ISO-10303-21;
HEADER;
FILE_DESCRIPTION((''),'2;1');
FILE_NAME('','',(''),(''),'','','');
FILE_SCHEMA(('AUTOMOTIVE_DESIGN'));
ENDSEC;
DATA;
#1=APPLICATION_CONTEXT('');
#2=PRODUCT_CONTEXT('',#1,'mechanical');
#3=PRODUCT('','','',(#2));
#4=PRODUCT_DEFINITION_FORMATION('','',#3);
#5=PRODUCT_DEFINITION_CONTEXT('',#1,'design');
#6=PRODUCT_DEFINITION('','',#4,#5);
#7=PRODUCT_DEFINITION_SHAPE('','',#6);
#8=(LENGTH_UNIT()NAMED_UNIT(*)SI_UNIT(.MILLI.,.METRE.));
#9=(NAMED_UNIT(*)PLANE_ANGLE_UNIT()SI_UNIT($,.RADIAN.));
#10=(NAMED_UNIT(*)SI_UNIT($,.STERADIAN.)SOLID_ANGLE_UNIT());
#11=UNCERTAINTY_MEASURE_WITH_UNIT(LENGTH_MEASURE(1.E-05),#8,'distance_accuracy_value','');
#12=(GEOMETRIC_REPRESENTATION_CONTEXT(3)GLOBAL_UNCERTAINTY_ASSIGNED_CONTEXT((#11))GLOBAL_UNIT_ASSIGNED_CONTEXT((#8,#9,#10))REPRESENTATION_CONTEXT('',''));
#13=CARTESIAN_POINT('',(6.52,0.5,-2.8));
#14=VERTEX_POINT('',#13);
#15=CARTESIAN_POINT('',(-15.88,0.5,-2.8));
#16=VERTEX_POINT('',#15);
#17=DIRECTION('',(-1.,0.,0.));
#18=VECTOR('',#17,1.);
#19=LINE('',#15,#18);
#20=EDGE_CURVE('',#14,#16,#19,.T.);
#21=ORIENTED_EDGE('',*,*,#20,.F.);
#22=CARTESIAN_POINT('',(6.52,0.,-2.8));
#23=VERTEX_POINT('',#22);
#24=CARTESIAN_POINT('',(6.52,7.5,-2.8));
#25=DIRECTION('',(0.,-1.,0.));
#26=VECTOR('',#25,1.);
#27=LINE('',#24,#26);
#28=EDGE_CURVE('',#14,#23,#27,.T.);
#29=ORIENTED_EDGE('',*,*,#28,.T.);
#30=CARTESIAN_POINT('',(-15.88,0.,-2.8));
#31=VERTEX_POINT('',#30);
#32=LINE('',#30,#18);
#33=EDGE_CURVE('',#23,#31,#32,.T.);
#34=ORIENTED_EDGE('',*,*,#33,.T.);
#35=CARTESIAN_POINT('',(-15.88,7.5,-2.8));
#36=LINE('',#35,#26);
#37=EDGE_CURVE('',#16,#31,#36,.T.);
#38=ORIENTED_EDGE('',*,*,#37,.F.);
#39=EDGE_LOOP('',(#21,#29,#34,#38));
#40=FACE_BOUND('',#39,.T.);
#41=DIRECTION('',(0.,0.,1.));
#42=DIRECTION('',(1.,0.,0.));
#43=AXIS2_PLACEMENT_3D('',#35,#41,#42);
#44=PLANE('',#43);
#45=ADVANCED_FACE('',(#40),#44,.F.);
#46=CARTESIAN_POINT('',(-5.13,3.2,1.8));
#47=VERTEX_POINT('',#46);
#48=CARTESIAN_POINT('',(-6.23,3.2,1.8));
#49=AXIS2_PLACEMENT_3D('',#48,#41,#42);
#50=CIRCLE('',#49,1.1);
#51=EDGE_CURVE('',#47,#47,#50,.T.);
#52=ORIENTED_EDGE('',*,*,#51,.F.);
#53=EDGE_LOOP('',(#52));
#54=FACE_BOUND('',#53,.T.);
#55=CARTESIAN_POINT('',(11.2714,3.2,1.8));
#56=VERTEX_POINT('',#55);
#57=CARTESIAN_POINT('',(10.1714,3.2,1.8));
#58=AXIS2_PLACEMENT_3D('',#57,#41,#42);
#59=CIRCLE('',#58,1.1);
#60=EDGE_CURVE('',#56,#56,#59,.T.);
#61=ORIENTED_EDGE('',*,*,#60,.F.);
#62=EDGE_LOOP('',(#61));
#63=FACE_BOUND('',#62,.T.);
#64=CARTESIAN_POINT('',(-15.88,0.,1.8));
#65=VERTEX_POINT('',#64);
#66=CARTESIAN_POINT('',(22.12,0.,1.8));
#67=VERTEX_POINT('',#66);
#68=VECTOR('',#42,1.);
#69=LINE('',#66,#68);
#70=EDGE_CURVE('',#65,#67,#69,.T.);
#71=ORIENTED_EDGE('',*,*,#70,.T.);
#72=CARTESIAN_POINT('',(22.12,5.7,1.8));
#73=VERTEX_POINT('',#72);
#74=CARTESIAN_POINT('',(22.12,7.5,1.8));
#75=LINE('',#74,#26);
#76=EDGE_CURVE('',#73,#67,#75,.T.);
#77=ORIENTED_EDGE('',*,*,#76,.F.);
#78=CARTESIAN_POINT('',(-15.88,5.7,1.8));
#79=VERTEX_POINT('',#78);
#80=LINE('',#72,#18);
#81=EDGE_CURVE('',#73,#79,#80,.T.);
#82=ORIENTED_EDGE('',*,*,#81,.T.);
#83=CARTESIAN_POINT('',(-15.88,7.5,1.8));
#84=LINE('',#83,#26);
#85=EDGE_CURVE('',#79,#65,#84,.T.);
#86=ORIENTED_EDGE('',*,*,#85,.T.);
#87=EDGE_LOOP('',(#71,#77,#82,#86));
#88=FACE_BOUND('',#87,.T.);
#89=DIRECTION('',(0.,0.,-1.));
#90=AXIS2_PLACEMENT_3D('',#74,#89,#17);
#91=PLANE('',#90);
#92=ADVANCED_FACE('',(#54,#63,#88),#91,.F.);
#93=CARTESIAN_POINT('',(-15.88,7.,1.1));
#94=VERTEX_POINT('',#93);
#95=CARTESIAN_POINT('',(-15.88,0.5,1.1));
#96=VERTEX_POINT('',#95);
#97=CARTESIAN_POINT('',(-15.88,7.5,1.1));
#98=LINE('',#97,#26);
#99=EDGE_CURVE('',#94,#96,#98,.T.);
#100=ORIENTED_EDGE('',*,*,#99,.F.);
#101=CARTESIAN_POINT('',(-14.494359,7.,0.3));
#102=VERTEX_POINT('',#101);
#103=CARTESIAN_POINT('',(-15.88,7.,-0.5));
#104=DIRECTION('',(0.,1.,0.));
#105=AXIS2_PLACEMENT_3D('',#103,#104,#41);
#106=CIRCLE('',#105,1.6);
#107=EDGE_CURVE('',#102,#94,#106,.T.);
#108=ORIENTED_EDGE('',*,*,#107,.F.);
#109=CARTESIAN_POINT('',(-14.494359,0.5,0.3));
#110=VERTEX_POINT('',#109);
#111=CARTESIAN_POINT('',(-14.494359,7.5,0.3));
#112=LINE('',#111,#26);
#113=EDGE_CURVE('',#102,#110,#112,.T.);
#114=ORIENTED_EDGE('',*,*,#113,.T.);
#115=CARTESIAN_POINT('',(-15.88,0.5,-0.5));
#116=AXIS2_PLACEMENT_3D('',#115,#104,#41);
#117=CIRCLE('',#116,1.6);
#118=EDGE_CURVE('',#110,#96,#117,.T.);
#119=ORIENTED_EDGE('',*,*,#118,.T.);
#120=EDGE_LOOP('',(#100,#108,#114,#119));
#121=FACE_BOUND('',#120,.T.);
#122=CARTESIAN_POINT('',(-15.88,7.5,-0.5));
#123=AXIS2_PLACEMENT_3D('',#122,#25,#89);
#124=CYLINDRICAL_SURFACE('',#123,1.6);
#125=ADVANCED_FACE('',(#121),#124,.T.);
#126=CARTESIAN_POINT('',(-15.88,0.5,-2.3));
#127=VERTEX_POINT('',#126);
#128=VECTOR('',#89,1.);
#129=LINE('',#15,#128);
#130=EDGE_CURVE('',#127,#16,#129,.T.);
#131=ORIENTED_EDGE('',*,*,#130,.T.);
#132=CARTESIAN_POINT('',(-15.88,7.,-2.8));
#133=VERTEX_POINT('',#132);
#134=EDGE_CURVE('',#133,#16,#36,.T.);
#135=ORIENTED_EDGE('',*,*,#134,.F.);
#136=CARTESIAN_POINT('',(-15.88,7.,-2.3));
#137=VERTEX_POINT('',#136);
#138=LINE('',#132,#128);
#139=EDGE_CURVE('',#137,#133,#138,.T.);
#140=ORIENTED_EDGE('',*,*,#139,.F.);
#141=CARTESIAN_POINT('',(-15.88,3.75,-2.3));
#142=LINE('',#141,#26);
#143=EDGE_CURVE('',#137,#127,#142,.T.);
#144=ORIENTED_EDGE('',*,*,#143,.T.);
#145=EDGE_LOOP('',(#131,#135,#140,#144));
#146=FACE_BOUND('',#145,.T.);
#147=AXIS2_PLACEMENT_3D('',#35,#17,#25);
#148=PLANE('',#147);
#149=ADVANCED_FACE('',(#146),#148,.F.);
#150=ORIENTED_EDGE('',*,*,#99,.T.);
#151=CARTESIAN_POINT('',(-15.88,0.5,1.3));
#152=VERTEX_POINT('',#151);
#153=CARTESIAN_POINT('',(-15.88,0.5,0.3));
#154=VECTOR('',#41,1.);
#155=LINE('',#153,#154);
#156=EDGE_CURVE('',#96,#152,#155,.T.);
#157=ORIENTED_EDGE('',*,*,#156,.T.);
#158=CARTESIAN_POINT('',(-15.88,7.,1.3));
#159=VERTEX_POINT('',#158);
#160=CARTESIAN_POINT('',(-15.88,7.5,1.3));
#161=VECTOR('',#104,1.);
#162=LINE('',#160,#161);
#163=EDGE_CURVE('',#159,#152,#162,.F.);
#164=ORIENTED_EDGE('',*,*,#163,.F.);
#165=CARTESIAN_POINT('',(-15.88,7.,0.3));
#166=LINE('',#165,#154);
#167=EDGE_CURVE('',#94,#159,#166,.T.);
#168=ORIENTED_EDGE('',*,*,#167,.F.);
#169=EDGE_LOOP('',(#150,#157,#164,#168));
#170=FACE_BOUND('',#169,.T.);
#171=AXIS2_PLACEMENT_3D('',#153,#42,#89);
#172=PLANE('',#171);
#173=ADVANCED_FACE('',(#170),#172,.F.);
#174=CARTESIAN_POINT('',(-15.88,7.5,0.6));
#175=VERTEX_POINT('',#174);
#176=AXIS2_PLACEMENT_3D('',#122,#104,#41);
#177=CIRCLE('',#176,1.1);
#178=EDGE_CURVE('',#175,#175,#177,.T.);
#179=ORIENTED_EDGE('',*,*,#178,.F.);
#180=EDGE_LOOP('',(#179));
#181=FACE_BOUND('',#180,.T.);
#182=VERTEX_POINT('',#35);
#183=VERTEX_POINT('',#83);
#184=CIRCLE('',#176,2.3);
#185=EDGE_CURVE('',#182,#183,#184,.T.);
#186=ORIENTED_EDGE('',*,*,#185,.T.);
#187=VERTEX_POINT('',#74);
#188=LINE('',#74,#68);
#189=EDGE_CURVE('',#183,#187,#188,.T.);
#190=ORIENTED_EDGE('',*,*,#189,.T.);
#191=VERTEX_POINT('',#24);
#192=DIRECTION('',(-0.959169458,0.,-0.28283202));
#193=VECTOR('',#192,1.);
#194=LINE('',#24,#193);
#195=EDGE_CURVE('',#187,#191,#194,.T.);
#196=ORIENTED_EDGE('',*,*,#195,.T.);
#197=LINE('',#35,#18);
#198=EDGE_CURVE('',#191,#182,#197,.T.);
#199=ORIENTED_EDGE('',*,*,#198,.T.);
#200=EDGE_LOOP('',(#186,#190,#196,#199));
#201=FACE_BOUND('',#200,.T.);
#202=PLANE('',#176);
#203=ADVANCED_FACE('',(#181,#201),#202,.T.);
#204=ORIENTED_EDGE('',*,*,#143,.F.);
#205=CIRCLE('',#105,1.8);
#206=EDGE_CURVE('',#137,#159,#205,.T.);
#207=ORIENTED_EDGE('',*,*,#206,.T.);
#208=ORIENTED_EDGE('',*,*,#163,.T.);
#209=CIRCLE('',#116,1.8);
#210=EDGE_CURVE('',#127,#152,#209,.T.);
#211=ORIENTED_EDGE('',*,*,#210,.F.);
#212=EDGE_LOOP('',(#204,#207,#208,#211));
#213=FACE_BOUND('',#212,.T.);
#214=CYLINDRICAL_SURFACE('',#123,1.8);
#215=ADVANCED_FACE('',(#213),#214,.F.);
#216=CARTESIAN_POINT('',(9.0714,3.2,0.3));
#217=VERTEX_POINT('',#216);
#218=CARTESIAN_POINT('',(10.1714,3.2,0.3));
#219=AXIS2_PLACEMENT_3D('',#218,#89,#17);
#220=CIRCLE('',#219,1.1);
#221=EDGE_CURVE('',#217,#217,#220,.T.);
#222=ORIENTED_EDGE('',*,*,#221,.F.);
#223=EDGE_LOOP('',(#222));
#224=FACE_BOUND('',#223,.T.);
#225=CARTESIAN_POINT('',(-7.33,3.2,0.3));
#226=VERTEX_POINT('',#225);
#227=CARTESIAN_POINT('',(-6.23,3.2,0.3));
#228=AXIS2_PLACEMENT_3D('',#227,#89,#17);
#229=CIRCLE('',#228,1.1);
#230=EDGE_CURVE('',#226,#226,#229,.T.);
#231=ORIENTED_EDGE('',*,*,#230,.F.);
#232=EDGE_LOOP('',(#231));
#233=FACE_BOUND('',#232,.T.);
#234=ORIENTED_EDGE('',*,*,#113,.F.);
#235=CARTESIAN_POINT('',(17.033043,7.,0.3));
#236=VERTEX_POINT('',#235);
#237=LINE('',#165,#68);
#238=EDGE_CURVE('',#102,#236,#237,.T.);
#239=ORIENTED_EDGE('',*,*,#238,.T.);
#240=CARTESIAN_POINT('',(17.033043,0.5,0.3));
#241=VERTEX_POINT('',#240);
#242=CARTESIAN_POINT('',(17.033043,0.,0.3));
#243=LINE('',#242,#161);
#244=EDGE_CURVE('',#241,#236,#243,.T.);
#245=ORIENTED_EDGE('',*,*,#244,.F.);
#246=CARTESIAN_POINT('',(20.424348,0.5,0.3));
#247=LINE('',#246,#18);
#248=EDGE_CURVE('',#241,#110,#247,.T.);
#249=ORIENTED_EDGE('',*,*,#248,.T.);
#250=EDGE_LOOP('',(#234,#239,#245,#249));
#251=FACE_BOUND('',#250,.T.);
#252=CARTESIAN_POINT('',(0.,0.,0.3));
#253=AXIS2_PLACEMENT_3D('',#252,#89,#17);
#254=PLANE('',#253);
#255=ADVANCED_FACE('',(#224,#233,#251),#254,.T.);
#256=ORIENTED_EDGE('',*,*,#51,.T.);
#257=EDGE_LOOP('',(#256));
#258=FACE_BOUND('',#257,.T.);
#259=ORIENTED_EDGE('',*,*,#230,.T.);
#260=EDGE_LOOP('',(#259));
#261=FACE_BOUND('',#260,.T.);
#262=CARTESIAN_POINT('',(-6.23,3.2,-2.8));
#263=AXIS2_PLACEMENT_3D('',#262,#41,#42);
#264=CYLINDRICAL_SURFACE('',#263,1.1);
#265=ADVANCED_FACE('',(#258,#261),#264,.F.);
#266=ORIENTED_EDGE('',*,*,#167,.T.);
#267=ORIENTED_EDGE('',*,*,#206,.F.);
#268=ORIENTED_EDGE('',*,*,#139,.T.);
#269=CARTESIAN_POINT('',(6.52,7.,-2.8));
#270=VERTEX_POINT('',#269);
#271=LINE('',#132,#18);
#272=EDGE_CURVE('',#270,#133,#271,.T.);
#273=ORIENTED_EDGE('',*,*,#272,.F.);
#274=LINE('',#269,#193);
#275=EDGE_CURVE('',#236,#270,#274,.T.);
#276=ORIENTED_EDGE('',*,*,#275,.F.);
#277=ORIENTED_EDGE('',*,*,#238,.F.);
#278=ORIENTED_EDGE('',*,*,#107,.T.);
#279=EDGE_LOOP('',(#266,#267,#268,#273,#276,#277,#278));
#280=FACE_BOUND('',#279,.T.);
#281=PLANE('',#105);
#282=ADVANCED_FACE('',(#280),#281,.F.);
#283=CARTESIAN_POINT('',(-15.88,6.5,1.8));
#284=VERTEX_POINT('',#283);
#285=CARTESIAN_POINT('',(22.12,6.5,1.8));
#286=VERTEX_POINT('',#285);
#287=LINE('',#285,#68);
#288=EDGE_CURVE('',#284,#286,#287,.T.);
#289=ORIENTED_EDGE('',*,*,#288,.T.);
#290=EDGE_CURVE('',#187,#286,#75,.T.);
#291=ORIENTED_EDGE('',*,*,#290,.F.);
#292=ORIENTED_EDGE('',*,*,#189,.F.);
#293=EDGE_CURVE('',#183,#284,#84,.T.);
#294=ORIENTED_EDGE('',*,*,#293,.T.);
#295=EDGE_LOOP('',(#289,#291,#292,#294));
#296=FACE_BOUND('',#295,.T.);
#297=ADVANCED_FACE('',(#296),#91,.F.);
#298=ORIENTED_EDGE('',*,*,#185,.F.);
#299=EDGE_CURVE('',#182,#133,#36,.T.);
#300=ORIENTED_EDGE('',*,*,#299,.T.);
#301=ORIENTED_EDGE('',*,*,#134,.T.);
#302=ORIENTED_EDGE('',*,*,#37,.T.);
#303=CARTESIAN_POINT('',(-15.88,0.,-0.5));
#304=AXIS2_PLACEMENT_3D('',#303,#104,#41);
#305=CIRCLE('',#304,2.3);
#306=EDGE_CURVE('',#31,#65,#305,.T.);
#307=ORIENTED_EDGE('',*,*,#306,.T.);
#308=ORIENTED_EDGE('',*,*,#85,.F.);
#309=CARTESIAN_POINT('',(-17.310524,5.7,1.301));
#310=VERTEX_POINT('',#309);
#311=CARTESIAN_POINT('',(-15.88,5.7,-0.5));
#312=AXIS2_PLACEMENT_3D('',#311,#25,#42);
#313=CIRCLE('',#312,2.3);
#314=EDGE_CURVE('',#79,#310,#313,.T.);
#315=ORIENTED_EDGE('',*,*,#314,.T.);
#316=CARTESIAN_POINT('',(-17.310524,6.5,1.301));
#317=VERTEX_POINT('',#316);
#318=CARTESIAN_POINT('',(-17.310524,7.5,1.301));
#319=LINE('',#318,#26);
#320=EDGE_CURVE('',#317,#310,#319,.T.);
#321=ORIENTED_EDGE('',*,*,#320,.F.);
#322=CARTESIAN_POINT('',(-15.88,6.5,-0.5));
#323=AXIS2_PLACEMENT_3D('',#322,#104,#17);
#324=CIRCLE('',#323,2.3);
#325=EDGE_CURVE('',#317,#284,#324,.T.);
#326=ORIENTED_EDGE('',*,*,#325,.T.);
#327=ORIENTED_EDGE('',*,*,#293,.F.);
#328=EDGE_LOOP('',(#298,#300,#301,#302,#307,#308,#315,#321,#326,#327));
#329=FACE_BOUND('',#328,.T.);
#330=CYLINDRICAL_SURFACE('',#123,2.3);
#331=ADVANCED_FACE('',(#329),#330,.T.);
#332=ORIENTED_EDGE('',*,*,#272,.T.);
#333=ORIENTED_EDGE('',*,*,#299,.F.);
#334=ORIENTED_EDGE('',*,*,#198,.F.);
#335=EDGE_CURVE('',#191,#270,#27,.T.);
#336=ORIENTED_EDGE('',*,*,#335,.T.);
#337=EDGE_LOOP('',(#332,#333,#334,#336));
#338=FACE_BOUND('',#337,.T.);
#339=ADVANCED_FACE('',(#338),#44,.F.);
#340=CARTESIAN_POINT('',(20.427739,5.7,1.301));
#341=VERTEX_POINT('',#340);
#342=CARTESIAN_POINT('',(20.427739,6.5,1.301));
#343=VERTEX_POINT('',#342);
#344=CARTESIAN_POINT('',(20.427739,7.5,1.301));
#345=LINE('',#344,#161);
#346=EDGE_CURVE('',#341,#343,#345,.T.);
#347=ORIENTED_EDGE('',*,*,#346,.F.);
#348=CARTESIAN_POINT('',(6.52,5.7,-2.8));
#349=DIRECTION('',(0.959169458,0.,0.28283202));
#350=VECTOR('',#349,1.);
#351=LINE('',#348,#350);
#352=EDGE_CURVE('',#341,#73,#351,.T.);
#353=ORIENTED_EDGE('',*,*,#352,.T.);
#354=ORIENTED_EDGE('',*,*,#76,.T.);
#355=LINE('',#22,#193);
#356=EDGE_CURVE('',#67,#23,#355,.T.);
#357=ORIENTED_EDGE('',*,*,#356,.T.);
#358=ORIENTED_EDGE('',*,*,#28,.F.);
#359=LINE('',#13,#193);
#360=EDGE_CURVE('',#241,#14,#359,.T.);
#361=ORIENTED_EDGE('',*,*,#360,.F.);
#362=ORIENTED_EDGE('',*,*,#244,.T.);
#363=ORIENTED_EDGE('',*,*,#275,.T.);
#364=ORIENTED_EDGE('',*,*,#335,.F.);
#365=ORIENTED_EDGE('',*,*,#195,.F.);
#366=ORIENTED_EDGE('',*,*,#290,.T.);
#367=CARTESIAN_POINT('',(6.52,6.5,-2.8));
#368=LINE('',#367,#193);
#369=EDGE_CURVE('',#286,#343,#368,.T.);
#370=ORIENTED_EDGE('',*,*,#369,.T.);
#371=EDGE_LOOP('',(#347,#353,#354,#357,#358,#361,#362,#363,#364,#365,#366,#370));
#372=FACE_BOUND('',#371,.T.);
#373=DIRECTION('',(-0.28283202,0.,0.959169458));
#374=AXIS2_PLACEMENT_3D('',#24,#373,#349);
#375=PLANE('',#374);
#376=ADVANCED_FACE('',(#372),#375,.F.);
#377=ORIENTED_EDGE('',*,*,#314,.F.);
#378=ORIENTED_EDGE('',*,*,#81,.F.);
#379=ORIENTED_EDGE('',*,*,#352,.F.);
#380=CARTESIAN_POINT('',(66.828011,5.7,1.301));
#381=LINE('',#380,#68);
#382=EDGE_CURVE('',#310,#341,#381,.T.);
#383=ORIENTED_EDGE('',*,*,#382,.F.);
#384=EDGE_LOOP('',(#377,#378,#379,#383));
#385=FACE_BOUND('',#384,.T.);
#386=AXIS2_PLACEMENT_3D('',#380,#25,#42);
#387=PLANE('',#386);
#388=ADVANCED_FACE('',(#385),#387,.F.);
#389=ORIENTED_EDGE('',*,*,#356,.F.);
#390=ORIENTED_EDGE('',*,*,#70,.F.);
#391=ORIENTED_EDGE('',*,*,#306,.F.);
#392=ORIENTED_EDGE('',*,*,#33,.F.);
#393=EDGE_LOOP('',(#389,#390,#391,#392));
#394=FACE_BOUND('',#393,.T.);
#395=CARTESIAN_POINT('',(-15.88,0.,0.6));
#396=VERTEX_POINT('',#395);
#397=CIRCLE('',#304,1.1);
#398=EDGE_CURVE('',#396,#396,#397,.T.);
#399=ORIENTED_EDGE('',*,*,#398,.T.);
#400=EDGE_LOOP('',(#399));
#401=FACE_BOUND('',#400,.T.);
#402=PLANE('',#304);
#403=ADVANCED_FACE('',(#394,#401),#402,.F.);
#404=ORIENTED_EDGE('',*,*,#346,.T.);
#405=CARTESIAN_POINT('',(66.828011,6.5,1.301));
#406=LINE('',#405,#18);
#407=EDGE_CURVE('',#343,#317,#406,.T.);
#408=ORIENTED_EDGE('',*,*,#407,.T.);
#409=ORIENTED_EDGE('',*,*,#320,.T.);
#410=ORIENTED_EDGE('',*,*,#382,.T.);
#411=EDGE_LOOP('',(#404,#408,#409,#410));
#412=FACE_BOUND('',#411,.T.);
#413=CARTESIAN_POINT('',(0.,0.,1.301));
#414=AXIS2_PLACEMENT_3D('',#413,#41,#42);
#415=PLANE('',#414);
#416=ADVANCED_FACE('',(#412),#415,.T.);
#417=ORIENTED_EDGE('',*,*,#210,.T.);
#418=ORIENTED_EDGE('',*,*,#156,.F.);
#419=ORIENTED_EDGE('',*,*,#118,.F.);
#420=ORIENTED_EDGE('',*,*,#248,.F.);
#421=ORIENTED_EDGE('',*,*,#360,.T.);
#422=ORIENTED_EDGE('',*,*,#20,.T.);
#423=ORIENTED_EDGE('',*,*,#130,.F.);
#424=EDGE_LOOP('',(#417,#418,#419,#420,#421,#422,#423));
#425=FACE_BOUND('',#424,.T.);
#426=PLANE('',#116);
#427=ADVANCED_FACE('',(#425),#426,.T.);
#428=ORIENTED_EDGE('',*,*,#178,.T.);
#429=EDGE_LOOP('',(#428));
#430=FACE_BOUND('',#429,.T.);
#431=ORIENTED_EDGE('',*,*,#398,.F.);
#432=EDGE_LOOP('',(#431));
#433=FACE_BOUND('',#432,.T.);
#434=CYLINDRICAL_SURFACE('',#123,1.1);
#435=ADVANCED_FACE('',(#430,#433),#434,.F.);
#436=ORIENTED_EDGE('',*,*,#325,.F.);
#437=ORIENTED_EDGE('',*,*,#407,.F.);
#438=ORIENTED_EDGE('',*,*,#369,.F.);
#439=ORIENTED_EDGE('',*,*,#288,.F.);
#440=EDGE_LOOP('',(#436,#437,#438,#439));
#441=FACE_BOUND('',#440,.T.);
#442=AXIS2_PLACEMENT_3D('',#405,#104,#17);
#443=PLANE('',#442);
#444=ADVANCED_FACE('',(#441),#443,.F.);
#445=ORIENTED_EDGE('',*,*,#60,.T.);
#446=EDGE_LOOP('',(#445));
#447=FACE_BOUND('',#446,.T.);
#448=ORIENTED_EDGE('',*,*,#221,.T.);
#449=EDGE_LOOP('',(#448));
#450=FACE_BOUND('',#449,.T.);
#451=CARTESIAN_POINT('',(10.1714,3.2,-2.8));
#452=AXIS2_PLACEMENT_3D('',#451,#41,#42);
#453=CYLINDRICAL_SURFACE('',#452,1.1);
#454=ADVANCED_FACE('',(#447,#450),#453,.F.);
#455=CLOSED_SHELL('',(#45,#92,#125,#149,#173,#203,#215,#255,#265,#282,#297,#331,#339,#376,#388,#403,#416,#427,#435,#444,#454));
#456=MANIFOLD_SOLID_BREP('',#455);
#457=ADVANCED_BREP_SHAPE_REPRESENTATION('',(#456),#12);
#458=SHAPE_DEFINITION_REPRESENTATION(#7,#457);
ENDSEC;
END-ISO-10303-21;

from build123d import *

# Parameters (mm, degrees)
SKETCH3_R           = 1.1
BOSS_EXTRUDE1_DEPTH = 7.5
SHELL1_START        = 0.5
SHELL1_OUTLINE_R    = 1.6
SHELL1_DEPTH        = 6.5
SKETCH5_W           = 36.304347826
SKETCH5_H           = 6.5
BOSS_EXTRUDE2_DEPTH = 1
CUT_EXTRUDE2_DEPTH  = 24.369518609
SKETCH7_R           = 1.1
CUT_EXTRUDE3_DEPTH  = 24.524123788
SKETCH10_W          = 87.275560702
SKETCH10_H          = 0.8
CUT_EXTRUDE15_DEPTH = 0.499
SKETCH11_R          = 1.1
CUT_EXTRUDE16_DEPTH = 24.805553974


# Read off the part's stored shape, not the designer's step: Shell1
with BuildPart() as part:
    # Sketch3 → Boss-Extrude1 (new body)
    with BuildSketch(Plane(origin=(0, 0, 0), x_dir=(1, 0, 0), z_dir=(0, 1, 0))):
        with BuildLine():
            Line((-15.88, 2.8), (6.52, 2.8))
            Line((6.52, 2.8), (22.12, -1.8))
            Line((22.12, -1.8), (-15.88, -1.8))
            ThreePointArc((-15.88, -1.8), (-18.18, 0.5), (-15.88, 2.8))
        make_face()
        with Locations(Location((-15.88, 0.5, 0), (0, 0, 270))):
            Circle(SKETCH3_R, mode=Mode.SUBTRACT)
    extrude(amount=BOSS_EXTRUDE1_DEPTH)

    # Shell1 outline → Shell1 (cut)
    with BuildSketch(Plane(origin=(0, 0, 0), x_dir=(1, 0, 0), z_dir=(0, 1, 0)).offset(SHELL1_START)):
        with BuildLine():
            Line((6.52, 2.8), (-15.88, 2.8))
            Line((-15.88, 2.8), (-15.88, 2.3))
            ThreePointArc((-15.88, 2.3), (-17.68, 0.5), (-15.88, -1.3))
            Line((-15.88, -1.3), (20.424347826, -1.3))
            Line((20.424347826, -1.3), (6.52, 2.8))
        make_face()
        with Locations((-15.88, 0.5)):
            Circle(SHELL1_OUTLINE_R, mode=Mode.SUBTRACT)
    extrude(amount=SHELL1_DEPTH, mode=Mode.SUBTRACT)

    # Sketch5 → Boss-Extrude2 (add)
    with BuildSketch(Plane(origin=(0, 0, 1.3), x_dir=(-1, 0, 0), z_dir=(0, 0, -1))):
        with Locations((-2.272173913, 3.75)):
            Rectangle(SKETCH5_W, SKETCH5_H)
    extrude(amount=BOSS_EXTRUDE2_DEPTH)

    # Sketch6 → Cut-Extrude2 (cut, through all)
    with BuildSketch(Plane(origin=(0, 7, 0), x_dir=(1, 0, 0), z_dir=(0, 1, 0))):
        Polygon((20.424347826, -0.3), (17.033043478, -0.3), (20.424347826, -1.3), align=None)
    extrude(amount=-CUT_EXTRUDE2_DEPTH, mode=Mode.SUBTRACT)

    # Sketch7 → Cut-Extrude3 (cut, through all)
    with BuildSketch(Plane(origin=(0, 7.5, 0), x_dir=(1, 0, 0), z_dir=(0, 1, 0))):
        with Locations(Location((-15.88, 0.5, 0), (0, 0, 270))):
            Circle(SKETCH7_R)
    extrude(amount=-CUT_EXTRUDE3_DEPTH, mode=Mode.SUBTRACT)

    # Sketch10 → Cut-Extrude15 (cut)
    with BuildSketch(Plane.XY.offset(1.8)):
        with Locations((23.190230884, 6.1)):
            Rectangle(SKETCH10_W, SKETCH10_H)
    extrude(amount=-CUT_EXTRUDE15_DEPTH, mode=Mode.SUBTRACT)

    # Sketch11 → Cut-Extrude16 (cut, through all)
    with BuildSketch(Plane.XY.offset(1.8)):
        with Locations((-6.23, 3.2)):
            Circle(SKETCH11_R)
        with Locations((10.1714, 3.2)):
            Circle(SKETCH11_R)
    extrude(amount=-CUT_EXTRUDE16_DEPTH, mode=Mode.SUBTRACT)


solid = part.part
